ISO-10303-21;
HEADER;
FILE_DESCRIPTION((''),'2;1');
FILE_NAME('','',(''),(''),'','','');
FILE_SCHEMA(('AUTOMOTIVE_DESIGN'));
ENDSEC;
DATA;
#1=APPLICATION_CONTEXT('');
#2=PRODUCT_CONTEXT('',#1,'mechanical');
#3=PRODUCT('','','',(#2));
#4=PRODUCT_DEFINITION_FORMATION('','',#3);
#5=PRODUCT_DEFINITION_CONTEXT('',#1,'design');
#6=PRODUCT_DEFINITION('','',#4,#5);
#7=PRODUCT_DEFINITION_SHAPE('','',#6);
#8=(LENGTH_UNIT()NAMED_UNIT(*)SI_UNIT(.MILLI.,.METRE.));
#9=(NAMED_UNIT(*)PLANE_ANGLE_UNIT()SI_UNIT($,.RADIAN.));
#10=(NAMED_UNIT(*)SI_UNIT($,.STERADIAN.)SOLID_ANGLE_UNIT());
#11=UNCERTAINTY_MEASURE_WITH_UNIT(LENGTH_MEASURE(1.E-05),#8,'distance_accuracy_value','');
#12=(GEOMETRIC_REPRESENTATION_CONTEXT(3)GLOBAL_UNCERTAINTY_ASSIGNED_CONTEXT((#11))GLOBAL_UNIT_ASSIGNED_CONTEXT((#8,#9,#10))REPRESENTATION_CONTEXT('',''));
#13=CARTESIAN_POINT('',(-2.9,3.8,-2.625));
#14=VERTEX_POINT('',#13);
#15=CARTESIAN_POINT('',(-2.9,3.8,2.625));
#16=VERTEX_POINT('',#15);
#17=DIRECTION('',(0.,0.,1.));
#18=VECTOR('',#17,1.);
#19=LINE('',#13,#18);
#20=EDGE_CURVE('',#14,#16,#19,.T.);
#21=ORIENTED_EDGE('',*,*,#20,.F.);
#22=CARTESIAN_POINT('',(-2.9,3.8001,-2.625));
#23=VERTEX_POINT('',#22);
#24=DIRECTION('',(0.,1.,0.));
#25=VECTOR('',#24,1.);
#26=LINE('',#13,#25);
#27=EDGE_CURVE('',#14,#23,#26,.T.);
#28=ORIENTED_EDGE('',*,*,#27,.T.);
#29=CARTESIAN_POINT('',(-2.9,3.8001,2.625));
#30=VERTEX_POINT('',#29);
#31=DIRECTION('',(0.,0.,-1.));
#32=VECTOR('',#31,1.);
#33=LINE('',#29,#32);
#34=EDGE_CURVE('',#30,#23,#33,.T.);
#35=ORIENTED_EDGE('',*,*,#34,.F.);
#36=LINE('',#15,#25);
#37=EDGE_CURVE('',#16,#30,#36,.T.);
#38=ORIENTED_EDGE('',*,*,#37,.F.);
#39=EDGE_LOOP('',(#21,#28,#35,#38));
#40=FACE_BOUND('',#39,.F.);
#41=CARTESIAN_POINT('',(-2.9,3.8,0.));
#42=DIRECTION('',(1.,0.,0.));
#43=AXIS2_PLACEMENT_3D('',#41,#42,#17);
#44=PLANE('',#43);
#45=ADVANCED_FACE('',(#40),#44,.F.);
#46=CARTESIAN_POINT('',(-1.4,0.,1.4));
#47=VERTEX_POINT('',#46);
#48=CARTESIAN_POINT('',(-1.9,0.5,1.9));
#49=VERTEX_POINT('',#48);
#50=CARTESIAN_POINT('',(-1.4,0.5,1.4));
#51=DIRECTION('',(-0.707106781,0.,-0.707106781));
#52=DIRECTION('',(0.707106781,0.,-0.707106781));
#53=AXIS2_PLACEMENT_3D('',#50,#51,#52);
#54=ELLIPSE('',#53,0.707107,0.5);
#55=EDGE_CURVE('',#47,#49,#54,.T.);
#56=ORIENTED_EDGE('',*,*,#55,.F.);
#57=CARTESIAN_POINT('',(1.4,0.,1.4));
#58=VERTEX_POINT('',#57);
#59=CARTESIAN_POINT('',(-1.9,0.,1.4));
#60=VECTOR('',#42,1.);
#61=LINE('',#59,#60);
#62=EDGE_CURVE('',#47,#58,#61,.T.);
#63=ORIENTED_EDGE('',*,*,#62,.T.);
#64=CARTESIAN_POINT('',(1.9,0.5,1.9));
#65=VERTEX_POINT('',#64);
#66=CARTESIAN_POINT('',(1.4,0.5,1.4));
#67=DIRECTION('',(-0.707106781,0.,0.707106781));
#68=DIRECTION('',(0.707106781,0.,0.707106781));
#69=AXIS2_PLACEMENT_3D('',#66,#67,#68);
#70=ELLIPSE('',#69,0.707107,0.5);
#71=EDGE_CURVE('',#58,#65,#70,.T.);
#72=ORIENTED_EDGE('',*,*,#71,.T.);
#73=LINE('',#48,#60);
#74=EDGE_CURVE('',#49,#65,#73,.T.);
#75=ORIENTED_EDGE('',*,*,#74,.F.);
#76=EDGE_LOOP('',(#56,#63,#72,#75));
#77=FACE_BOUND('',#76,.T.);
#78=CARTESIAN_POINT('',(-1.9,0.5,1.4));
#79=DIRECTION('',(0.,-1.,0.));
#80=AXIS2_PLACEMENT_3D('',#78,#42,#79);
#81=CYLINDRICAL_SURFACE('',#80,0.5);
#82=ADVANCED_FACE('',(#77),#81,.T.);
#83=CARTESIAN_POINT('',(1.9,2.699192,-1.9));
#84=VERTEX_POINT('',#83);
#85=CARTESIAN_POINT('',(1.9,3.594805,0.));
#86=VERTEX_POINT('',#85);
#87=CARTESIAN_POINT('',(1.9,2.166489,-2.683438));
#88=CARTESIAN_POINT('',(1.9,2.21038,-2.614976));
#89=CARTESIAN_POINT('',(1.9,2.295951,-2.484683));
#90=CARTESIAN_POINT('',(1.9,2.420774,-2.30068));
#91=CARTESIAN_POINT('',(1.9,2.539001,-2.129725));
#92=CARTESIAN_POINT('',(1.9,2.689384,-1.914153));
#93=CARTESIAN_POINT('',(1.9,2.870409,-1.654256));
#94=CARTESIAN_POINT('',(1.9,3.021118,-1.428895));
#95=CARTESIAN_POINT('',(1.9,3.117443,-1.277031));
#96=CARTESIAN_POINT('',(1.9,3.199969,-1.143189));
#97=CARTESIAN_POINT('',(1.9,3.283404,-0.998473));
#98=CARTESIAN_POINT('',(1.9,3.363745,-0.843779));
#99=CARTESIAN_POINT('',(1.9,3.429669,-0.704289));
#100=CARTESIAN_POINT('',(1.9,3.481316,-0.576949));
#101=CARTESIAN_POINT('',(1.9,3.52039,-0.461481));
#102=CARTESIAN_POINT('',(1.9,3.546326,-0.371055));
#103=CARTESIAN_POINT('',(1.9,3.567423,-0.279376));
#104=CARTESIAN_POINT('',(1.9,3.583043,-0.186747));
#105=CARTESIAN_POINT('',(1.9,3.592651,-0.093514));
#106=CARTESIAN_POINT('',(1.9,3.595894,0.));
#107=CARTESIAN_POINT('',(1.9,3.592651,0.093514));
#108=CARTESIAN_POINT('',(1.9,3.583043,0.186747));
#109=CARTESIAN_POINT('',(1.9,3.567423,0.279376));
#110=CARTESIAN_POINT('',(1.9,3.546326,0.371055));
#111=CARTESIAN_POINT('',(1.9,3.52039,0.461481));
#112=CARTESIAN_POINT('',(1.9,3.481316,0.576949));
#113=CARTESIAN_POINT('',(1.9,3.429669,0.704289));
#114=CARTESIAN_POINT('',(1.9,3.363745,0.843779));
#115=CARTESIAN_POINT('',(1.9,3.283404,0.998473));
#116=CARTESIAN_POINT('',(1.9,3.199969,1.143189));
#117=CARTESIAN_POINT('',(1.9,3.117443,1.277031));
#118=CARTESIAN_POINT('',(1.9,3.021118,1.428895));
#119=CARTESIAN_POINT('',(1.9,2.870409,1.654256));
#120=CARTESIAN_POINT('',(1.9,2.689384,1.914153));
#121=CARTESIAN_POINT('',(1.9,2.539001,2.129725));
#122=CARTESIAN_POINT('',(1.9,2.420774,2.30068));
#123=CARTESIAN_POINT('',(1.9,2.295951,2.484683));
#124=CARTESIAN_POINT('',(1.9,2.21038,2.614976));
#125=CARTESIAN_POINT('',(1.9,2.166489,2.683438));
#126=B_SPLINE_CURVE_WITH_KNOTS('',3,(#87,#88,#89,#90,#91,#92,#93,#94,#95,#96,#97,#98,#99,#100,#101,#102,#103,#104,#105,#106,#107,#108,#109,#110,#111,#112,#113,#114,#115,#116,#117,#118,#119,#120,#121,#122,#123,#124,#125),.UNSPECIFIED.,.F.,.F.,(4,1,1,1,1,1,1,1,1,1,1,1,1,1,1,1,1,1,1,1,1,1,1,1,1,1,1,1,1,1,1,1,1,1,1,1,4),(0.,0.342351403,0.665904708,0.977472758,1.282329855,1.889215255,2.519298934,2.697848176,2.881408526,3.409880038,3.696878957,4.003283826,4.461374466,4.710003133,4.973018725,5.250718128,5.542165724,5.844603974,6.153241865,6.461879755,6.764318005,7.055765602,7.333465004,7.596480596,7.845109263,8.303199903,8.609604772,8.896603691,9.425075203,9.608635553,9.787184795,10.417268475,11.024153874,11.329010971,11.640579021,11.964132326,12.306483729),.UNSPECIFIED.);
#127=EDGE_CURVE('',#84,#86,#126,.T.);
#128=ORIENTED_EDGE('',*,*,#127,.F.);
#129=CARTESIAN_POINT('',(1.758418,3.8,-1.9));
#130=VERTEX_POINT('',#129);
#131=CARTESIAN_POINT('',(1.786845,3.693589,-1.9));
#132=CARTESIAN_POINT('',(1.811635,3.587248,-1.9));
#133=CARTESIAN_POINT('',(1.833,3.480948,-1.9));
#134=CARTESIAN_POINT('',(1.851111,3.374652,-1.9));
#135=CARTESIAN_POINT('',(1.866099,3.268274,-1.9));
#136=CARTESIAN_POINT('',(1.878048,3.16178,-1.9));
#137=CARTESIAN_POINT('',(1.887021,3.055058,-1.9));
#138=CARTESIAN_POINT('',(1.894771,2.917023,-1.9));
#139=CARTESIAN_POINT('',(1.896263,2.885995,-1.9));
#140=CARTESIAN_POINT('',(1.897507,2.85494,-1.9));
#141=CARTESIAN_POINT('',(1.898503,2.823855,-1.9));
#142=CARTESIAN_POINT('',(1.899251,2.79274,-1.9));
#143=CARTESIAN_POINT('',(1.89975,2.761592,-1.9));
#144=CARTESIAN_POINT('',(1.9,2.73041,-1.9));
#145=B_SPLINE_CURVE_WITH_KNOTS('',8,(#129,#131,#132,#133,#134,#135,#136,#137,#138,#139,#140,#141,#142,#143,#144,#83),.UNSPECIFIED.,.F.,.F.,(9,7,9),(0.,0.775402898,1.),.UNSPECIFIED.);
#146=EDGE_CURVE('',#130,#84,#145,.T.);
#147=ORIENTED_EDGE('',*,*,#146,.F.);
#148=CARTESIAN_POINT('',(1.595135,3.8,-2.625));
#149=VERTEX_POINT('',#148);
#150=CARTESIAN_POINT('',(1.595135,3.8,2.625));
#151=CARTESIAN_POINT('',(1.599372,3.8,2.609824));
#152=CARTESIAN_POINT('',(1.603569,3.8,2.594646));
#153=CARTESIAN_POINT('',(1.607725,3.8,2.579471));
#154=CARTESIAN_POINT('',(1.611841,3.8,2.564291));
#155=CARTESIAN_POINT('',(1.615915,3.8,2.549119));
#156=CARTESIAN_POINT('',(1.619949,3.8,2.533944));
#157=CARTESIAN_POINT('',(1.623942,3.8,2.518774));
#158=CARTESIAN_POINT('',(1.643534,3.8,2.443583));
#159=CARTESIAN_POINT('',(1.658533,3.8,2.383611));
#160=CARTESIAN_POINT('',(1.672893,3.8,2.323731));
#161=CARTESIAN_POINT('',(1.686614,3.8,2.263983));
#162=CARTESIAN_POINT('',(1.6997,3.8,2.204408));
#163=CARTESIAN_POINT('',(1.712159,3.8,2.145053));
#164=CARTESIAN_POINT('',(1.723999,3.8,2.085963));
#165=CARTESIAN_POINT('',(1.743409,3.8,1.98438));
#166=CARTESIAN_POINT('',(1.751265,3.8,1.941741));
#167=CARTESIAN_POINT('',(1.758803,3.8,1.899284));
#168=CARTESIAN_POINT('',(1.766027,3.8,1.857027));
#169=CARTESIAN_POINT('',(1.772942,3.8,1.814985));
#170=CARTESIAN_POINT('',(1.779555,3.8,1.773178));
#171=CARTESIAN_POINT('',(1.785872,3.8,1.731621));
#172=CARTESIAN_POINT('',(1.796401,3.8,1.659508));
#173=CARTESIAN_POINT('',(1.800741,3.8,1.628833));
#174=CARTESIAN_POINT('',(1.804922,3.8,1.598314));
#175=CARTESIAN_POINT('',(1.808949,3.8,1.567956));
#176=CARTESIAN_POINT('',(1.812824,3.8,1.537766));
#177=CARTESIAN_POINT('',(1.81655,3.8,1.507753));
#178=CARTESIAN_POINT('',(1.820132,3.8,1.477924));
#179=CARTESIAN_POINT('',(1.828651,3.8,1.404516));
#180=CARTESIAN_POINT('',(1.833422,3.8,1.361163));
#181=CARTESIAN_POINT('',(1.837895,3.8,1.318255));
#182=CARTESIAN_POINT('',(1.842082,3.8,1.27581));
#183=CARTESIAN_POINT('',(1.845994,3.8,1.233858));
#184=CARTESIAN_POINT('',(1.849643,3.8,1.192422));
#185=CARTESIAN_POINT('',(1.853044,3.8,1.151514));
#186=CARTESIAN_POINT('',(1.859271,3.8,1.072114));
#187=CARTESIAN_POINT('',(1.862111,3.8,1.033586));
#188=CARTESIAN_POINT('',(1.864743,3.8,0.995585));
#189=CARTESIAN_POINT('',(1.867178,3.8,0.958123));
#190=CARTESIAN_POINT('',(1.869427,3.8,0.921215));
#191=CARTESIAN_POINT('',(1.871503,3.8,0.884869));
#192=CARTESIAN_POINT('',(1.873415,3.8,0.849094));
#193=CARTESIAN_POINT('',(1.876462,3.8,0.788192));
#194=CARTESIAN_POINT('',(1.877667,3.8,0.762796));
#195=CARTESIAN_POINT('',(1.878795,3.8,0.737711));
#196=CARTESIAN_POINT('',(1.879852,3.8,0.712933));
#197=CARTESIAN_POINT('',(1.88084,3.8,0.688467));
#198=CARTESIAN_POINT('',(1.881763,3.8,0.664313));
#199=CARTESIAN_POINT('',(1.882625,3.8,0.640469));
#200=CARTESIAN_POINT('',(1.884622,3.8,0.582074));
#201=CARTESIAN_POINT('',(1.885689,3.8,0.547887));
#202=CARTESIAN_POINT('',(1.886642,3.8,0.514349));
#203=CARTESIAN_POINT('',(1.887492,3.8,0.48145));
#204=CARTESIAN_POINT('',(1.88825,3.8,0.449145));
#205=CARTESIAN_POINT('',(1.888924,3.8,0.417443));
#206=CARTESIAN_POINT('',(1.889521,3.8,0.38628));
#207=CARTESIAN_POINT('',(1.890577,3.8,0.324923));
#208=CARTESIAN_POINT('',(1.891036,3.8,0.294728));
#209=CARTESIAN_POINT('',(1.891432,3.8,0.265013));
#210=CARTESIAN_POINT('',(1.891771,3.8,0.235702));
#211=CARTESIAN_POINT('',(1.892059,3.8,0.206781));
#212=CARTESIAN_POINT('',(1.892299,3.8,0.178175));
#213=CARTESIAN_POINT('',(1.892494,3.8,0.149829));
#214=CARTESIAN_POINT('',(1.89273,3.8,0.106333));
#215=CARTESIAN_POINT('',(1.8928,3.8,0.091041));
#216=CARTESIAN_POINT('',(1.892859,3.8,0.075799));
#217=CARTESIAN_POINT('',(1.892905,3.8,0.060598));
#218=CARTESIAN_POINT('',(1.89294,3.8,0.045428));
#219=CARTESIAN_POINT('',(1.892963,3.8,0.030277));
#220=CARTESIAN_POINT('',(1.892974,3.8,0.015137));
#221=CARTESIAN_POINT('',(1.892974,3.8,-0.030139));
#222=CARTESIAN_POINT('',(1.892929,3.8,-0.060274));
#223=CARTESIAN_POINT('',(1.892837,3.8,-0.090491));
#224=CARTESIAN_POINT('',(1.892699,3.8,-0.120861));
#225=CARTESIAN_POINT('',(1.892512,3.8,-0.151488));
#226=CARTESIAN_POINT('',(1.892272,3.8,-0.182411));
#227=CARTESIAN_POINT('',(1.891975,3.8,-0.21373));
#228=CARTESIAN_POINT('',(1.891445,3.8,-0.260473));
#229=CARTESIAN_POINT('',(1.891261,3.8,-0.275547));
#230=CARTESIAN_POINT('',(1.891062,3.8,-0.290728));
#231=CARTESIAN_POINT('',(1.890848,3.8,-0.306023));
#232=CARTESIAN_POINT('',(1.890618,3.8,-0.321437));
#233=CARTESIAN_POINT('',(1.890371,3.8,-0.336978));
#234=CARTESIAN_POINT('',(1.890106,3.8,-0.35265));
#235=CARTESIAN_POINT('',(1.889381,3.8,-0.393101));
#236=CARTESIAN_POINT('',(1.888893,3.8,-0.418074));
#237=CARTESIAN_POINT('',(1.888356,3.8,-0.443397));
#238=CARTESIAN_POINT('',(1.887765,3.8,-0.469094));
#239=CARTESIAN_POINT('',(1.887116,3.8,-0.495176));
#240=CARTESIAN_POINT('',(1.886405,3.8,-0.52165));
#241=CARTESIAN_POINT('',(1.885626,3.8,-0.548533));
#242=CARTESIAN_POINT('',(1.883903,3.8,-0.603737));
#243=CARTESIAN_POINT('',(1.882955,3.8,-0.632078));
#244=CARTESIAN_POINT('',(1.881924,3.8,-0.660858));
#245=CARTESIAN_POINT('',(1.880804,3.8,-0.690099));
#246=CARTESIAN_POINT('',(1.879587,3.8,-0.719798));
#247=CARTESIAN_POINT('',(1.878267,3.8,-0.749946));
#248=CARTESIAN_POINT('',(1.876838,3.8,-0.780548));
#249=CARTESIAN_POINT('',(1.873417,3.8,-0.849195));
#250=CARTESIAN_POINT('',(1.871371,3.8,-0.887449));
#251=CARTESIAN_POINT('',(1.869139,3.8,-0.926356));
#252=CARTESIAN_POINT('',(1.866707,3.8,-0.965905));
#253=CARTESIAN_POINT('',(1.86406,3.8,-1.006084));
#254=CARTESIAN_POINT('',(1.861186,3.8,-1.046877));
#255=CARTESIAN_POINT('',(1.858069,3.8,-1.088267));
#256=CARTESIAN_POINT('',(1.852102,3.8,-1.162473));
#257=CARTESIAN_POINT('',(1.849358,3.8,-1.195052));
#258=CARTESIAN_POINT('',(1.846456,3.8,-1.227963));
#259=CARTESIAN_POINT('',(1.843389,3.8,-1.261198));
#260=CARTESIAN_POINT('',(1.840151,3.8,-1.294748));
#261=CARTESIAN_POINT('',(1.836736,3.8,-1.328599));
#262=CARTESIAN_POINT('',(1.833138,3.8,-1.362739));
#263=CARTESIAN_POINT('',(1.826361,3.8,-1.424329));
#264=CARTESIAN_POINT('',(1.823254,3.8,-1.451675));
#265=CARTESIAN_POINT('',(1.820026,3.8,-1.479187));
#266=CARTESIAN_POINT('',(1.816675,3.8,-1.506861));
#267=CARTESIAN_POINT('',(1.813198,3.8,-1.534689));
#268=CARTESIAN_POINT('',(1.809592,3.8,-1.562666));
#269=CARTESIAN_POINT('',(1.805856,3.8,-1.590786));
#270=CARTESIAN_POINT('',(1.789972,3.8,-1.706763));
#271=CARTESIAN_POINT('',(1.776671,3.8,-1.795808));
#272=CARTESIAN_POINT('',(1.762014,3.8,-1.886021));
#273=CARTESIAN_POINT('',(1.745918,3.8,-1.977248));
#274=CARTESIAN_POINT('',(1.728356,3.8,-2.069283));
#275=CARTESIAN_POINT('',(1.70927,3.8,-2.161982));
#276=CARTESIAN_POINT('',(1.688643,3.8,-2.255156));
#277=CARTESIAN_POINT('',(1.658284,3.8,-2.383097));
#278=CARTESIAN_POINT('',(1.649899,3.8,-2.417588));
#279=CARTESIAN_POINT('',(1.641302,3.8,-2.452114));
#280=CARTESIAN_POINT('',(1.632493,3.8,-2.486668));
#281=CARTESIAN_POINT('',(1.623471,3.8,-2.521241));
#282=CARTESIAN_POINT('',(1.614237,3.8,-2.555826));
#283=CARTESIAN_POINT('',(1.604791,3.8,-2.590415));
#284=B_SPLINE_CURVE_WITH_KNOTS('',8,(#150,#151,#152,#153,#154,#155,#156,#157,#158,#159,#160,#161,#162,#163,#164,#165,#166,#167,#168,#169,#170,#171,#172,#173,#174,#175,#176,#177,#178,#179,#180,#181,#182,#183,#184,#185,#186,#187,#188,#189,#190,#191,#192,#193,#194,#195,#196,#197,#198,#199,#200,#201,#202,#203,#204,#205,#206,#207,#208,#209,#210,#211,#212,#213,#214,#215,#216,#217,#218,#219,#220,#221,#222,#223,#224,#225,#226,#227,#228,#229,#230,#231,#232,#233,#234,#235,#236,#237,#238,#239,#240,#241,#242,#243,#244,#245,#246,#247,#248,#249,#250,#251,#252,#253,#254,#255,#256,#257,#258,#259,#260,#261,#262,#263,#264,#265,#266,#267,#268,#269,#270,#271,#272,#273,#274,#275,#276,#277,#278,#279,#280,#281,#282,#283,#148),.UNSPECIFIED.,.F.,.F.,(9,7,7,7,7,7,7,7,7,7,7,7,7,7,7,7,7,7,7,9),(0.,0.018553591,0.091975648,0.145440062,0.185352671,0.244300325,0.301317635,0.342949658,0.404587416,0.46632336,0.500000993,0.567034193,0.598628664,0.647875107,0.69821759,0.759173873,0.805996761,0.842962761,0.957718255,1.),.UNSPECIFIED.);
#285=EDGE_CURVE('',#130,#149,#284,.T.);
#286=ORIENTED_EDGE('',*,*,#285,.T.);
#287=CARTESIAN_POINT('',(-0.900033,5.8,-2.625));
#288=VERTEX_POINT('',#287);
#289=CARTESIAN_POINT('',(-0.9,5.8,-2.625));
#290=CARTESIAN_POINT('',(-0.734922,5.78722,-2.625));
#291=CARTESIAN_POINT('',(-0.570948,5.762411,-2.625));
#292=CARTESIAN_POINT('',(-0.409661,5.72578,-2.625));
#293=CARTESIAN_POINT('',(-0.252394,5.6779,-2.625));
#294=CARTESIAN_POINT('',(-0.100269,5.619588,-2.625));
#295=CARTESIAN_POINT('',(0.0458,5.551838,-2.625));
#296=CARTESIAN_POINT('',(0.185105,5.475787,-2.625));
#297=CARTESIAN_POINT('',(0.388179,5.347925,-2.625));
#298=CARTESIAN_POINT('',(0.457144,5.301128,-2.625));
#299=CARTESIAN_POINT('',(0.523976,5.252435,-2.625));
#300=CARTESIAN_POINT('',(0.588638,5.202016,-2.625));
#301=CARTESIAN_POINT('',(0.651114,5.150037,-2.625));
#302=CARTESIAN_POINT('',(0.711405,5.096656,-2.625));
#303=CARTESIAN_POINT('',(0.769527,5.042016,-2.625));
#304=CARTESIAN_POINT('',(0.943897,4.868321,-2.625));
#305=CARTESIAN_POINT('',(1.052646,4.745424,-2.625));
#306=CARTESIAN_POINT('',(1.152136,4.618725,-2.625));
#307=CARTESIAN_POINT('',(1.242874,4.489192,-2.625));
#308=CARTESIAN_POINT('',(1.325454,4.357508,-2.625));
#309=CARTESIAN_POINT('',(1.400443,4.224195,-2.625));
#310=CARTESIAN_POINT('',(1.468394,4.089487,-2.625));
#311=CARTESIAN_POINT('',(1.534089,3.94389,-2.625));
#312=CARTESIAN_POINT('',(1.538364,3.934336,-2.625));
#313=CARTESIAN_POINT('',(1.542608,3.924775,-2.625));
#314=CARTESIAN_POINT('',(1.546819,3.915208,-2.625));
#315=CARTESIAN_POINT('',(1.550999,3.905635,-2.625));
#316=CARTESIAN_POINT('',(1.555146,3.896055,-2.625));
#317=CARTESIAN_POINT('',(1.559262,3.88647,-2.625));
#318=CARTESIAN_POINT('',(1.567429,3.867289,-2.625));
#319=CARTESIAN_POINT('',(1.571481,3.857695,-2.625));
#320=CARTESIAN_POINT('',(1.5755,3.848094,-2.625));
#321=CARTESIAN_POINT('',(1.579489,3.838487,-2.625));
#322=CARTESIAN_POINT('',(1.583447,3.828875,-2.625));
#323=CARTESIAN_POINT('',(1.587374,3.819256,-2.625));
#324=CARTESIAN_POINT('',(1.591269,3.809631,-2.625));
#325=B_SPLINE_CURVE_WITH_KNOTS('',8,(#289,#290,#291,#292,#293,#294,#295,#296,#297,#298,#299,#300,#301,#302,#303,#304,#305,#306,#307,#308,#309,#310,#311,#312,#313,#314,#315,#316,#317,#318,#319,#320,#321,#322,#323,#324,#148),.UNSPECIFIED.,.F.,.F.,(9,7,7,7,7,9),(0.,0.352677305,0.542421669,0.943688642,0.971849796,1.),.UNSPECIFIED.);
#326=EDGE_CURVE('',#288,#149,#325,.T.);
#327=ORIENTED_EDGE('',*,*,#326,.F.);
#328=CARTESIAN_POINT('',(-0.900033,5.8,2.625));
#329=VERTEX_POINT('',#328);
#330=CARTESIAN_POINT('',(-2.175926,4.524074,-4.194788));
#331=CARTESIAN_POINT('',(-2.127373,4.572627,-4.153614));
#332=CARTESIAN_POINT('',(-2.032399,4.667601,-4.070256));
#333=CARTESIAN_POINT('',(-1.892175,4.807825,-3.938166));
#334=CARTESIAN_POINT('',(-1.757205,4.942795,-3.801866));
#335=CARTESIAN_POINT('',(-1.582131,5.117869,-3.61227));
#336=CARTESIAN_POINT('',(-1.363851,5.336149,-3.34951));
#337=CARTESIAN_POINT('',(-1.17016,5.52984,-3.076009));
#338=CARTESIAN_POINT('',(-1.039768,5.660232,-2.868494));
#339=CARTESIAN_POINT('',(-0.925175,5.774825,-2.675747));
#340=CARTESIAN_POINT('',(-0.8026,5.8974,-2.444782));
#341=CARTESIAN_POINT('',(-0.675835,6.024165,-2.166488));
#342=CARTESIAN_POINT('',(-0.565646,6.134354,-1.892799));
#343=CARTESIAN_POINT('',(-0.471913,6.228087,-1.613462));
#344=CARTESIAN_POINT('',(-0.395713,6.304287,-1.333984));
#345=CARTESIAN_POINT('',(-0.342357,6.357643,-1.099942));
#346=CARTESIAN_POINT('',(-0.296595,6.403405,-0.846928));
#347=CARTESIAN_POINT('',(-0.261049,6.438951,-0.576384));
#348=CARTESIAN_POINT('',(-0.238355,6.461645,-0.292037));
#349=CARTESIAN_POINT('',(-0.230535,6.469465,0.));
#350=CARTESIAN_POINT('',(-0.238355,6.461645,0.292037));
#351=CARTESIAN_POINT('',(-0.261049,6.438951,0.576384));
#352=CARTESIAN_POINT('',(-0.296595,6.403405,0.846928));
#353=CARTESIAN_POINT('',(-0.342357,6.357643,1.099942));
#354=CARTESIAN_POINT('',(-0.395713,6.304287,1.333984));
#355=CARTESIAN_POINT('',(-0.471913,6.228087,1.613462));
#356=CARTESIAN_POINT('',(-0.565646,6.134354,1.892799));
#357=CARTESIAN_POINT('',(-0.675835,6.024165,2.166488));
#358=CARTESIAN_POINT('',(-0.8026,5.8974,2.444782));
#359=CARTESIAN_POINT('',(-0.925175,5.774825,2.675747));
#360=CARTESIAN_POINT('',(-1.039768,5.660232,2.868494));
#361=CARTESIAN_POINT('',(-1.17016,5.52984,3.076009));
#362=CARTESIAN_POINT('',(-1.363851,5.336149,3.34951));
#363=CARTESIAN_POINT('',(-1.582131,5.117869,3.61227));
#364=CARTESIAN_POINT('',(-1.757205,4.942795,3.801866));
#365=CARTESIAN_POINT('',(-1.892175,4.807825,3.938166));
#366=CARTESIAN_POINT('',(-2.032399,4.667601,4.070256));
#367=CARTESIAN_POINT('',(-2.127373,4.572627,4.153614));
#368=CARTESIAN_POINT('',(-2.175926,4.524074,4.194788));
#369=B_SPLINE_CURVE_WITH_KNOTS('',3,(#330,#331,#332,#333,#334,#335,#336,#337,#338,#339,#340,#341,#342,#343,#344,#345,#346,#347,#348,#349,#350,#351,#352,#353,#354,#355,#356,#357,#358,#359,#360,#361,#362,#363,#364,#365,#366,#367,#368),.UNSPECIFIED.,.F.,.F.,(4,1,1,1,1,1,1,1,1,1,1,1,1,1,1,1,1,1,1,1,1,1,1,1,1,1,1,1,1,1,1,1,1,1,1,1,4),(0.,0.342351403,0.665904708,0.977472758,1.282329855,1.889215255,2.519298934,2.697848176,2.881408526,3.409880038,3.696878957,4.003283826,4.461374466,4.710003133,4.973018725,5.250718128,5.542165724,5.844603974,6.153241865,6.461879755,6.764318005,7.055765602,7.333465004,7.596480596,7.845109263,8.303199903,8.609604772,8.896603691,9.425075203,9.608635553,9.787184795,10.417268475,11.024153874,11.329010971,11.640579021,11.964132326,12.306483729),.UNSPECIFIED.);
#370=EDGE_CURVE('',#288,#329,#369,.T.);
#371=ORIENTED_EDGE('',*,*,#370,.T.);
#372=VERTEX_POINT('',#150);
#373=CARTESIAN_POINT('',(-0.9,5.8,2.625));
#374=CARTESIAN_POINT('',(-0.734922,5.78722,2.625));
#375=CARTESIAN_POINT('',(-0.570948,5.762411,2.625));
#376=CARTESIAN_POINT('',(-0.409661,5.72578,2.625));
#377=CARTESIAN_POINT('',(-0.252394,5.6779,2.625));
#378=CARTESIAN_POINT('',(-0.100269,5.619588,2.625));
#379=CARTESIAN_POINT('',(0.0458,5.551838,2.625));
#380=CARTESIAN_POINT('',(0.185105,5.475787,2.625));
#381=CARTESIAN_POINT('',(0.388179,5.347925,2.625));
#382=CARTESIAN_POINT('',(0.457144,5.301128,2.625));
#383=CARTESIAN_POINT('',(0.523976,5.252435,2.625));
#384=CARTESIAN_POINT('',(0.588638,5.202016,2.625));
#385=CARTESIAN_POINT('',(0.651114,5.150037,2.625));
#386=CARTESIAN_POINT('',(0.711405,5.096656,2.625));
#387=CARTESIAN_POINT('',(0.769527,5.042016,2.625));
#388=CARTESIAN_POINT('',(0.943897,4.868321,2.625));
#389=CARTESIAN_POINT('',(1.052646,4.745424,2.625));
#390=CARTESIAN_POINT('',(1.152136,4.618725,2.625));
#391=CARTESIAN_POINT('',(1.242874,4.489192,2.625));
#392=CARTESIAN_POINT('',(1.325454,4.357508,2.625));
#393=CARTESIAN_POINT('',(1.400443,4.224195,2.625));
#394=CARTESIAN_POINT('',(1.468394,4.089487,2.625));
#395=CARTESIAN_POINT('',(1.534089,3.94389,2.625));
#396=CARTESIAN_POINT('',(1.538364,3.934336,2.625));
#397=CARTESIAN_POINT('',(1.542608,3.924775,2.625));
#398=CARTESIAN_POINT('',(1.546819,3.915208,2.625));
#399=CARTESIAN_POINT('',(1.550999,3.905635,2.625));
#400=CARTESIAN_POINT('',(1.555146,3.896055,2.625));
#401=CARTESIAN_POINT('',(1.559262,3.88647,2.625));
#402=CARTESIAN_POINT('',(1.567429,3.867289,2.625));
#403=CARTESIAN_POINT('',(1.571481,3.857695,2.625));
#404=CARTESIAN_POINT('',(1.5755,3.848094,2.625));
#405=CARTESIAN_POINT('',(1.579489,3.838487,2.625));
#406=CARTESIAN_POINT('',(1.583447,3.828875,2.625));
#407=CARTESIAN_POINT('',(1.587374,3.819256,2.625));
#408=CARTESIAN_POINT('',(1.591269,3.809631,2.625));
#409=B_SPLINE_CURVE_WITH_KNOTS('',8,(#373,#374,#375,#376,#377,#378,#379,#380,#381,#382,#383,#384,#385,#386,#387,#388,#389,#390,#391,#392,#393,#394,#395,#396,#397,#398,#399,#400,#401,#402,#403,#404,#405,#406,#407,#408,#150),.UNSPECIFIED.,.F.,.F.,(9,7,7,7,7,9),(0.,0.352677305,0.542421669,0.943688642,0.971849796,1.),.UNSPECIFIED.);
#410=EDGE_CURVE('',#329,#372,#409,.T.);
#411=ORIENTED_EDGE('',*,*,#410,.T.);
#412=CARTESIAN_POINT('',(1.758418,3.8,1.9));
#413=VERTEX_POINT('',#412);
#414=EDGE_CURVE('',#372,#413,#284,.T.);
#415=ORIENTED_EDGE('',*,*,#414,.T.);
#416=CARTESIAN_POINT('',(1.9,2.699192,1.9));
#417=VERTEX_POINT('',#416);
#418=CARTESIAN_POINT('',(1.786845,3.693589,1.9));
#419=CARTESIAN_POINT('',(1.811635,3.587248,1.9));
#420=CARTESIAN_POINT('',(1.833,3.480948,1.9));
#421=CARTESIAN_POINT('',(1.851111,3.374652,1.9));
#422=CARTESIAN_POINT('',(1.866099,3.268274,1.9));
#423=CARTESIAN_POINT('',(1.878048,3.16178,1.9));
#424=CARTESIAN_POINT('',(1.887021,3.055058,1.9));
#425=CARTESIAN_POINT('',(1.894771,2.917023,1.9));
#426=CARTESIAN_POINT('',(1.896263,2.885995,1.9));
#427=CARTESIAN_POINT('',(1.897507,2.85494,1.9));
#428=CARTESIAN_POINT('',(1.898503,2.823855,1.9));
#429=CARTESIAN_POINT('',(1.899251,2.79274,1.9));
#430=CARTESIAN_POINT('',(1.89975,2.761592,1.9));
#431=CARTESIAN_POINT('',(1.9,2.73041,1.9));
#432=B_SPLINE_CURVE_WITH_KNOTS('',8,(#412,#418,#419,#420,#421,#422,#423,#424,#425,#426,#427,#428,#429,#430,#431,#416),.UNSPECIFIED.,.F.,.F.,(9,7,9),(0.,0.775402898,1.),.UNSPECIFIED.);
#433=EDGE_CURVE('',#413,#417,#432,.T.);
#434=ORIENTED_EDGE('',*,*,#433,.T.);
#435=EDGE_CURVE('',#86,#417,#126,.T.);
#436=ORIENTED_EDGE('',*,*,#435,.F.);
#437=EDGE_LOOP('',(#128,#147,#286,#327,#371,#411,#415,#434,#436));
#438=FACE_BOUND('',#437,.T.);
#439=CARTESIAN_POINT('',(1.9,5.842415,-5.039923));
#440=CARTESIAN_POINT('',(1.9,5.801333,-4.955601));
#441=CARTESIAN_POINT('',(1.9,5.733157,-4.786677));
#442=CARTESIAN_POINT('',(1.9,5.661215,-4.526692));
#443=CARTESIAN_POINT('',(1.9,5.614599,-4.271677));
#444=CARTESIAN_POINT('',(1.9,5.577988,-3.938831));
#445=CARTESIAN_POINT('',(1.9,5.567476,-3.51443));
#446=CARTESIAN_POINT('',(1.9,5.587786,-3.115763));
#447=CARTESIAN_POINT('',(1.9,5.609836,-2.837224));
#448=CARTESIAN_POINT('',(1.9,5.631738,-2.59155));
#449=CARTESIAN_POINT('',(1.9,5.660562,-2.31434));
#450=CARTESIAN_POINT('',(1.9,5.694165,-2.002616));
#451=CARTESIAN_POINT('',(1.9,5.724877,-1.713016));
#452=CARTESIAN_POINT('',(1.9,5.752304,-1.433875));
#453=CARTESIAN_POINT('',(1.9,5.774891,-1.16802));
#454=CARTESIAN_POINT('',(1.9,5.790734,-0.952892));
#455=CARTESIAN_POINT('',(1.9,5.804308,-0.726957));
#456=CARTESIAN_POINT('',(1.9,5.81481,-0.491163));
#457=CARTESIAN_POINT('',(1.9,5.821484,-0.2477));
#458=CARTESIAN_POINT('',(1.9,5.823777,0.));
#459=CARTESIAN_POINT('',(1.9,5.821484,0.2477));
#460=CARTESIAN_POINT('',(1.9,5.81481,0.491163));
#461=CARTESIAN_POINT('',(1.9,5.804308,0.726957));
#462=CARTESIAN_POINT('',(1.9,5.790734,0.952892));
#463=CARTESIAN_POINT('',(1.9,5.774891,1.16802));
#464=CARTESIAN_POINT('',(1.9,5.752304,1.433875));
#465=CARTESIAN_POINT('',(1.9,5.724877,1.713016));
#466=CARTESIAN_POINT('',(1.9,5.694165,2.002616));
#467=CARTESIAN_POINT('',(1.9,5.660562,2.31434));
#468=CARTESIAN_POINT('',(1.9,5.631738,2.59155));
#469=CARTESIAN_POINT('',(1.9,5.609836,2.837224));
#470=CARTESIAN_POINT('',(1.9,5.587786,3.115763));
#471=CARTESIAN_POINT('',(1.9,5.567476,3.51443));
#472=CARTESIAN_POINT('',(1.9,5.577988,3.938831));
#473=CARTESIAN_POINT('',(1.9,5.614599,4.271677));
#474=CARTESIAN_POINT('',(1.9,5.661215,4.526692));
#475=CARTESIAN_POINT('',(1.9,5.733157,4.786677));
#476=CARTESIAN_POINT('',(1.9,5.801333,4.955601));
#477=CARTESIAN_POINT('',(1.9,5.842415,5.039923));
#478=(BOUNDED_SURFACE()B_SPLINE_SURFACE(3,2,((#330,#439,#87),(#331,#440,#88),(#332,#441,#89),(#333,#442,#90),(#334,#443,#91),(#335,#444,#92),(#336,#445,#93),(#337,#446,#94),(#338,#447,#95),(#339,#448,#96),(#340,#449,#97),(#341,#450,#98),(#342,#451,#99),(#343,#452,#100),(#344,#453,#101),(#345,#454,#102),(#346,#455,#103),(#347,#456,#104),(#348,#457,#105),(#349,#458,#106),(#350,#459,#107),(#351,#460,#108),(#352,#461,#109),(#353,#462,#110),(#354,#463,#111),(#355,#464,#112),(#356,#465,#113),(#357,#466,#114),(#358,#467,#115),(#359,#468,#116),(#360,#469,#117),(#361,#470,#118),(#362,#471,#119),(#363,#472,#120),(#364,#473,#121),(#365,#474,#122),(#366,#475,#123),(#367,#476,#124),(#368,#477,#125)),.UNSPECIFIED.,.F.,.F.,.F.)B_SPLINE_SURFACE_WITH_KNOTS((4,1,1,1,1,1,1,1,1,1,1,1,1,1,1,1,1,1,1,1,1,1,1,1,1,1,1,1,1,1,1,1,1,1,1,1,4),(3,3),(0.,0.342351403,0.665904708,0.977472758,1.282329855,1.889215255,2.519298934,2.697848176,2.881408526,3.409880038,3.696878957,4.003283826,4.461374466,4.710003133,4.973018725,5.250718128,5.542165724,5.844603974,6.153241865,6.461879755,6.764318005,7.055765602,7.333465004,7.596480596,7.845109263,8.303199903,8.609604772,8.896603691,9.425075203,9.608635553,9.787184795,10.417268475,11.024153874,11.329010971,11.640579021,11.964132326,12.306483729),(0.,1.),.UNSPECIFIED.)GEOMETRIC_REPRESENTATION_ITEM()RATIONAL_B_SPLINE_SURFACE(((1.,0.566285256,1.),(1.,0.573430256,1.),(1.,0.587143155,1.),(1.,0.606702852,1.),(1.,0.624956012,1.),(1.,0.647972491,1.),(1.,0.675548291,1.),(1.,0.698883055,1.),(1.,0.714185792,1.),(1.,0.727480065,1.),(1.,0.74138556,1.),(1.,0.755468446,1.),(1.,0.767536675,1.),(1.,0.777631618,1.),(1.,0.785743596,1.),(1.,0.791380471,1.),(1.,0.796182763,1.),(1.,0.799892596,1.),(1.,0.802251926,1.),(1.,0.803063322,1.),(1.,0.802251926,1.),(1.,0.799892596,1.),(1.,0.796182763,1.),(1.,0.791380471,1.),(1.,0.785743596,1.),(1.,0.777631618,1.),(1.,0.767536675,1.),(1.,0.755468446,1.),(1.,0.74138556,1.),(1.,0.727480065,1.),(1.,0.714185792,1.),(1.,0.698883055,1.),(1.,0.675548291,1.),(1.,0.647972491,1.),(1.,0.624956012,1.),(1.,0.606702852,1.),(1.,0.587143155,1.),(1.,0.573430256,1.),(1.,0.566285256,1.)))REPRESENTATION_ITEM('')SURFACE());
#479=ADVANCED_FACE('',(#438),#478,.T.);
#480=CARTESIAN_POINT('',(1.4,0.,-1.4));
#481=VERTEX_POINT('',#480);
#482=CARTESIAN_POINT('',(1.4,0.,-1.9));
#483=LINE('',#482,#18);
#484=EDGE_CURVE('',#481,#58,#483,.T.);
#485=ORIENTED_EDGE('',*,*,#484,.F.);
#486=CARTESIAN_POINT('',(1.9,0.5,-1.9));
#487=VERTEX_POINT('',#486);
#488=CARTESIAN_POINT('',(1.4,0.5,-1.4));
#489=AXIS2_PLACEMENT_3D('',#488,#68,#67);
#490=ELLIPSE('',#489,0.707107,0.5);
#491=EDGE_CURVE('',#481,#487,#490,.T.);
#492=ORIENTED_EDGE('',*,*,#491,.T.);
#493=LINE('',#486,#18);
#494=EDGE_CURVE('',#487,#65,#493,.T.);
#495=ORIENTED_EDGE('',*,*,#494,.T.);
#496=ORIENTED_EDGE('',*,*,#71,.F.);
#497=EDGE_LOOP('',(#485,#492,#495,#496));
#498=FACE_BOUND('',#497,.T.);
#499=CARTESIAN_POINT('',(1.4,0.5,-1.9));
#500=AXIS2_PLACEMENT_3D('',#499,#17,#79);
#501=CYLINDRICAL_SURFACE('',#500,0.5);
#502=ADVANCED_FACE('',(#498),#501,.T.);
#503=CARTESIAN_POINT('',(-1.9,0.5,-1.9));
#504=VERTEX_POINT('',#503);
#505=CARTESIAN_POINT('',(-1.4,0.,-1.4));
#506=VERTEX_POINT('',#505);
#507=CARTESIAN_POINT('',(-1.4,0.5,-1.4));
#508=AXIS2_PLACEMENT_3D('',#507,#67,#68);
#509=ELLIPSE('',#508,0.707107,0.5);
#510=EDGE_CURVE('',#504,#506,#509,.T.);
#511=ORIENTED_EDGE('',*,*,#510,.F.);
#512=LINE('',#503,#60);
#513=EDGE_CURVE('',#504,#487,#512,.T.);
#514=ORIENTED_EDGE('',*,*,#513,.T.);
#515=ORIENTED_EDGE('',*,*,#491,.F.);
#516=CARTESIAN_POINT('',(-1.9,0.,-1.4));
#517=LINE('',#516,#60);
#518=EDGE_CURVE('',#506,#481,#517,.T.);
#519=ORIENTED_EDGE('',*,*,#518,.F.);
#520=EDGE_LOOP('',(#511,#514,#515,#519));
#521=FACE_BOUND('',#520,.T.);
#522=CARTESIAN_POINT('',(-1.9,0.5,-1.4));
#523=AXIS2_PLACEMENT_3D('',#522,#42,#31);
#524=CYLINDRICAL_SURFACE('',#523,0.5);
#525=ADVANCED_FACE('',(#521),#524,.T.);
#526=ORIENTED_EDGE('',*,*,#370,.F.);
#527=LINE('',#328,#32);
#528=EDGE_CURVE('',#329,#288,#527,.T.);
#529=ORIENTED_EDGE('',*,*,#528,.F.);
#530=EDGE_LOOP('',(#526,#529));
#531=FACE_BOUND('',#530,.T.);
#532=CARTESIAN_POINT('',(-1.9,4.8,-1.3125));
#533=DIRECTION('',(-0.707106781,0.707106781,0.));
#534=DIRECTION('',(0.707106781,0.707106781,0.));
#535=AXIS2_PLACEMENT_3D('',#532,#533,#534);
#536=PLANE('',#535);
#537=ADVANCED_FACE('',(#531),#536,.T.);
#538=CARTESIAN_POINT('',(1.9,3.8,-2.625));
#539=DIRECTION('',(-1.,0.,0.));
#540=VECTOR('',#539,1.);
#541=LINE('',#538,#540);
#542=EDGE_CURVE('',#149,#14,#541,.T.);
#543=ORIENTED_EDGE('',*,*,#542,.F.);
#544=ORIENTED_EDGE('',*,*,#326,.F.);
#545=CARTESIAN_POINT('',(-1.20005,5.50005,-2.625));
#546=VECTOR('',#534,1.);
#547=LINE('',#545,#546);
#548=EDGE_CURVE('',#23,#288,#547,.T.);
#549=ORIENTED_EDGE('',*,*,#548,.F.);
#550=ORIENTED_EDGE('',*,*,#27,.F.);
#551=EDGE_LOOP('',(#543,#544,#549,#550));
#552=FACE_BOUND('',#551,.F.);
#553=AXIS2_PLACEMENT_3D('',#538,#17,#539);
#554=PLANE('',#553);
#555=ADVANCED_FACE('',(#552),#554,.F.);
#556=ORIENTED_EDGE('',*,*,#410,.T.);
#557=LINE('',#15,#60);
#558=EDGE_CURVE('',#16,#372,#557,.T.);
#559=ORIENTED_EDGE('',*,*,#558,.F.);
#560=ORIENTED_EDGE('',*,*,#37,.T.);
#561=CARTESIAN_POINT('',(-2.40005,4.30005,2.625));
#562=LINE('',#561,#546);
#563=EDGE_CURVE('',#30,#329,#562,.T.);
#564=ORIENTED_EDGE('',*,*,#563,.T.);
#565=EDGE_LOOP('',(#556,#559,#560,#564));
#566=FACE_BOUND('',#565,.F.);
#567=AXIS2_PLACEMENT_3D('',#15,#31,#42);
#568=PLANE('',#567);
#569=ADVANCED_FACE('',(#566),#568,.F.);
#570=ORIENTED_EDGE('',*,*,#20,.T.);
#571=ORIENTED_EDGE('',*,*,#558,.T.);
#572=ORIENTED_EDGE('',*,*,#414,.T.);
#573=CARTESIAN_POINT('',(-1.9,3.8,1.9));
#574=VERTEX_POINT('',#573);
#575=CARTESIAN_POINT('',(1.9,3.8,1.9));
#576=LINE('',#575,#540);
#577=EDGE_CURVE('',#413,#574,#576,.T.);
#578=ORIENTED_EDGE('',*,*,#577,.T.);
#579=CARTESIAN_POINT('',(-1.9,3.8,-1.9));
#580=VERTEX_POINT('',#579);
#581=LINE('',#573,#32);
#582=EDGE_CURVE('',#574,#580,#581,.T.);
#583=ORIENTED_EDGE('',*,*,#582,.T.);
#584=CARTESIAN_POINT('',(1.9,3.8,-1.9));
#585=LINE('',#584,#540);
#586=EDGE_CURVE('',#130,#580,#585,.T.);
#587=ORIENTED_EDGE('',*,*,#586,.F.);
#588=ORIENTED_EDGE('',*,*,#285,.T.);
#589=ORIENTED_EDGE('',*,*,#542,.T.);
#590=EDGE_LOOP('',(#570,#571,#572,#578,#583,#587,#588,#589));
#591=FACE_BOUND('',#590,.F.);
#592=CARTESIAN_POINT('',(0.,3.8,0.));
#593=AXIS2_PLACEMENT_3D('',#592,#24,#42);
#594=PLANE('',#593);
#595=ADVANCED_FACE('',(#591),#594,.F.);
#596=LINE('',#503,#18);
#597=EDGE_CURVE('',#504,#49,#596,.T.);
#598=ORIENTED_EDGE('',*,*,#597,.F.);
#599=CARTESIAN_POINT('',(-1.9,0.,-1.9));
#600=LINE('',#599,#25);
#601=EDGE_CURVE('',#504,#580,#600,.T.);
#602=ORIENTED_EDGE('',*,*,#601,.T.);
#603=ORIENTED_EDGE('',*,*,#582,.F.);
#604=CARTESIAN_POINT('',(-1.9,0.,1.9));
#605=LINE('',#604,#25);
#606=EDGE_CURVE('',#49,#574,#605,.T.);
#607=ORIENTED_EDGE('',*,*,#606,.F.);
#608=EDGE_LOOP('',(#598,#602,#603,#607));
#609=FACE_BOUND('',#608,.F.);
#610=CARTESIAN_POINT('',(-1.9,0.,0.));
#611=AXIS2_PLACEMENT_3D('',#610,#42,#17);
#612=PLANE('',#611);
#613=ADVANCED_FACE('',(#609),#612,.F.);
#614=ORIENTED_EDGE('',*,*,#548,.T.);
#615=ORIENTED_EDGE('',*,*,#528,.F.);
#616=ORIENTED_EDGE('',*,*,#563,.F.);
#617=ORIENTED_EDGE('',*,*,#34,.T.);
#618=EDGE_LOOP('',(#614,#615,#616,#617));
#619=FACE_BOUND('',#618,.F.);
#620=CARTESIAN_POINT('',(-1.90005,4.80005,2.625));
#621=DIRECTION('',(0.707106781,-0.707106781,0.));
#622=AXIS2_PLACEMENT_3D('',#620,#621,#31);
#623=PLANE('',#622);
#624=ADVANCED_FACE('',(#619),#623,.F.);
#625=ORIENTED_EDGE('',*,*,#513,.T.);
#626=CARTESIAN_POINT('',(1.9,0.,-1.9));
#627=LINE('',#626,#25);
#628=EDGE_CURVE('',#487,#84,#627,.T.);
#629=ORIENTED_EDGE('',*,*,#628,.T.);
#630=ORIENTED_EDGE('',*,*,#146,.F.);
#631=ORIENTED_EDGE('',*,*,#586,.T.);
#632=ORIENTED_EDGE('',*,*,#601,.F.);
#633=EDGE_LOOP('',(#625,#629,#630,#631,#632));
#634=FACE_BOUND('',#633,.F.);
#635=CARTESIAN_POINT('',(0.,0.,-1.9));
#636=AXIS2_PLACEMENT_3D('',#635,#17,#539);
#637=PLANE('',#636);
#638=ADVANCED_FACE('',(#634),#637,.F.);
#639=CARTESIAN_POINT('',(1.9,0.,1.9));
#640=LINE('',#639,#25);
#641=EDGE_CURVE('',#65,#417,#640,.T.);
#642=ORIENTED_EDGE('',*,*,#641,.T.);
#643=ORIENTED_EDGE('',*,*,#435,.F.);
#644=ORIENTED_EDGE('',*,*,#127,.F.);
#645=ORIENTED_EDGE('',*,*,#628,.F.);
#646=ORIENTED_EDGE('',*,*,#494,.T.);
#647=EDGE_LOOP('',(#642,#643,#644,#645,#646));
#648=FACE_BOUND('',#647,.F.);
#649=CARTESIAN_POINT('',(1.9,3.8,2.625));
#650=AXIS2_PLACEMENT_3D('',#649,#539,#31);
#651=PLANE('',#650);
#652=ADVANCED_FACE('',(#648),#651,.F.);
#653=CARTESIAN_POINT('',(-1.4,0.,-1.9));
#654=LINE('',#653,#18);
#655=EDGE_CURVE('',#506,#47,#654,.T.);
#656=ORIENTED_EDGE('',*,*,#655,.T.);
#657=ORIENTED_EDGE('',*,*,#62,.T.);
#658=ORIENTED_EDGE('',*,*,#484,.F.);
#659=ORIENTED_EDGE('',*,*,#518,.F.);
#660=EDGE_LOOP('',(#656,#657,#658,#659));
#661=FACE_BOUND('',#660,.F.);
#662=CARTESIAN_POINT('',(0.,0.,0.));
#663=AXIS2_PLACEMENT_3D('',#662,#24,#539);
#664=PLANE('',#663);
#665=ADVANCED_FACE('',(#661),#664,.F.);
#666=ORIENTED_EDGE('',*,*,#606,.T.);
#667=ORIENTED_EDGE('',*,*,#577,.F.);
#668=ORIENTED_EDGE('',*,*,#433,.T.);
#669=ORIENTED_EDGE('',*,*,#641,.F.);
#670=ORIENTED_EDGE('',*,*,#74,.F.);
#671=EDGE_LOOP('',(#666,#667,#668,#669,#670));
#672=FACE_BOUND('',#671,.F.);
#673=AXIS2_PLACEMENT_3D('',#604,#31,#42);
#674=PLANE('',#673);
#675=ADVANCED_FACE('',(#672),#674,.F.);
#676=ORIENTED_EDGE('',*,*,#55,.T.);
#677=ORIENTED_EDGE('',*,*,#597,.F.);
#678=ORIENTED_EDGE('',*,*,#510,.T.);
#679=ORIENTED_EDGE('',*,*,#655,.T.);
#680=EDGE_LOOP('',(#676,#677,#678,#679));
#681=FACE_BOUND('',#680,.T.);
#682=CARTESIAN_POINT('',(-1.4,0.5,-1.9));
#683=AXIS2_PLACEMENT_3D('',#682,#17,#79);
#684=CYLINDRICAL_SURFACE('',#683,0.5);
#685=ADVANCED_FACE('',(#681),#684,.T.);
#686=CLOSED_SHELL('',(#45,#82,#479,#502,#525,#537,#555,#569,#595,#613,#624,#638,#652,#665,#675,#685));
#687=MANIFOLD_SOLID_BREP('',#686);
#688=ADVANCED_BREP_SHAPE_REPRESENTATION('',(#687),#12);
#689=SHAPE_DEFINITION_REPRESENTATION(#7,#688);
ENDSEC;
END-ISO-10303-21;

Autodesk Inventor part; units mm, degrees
ref_plane "YZ Plane" through (0, 0, 0) normal (1, 0, 0) x (0, 1, 0)
ref_plane "XZ Plane" through (0, 0, 0) normal (0, 1, 0) x (-1, 0, 0)
ref_plane "XY Plane" through (0, 0, 0) normal (0, 0, 1) x (1, 0, 0)
sketch "Эскиз1" plane through (0, 0, 0) normal (0, 1, 0) x (-1, 0, 0)
  line L0 (1.9, 1.9) -> (-1.9, 1.9)
  line L1 (-1.9, 1.9) -> (-1.9, -1.9)
  line L2 (-1.9, -1.9) -> (1.9, -1.9)
  line L3 (1.9, -1.9) -> (1.9, 1.9)
  line L4 (2.66, 0) -> (-2.66, 0) projected
  line L5 (0, -2.66) -> (0, 2.66) projected
  point P0 (0, 0)
  dimension "d0" = 3.8
extrude "Выдавливание1" add sketch "Эскиз1" along normal blind 3.8
sketch "Эскиз2" plane through (0, 3.8, 0) normal (0, 1, 0) x (1, 0, 0)
  line L0 (-2.9, -2.625) -> (1.9, -2.625)
  line L1 (1.9, -2.625) -> (1.9, 2.625)
  line L2 (1.9, 2.625) -> (-2.9, 2.625)
  line L3 (-2.9, 2.625) -> (-2.9, -2.625)
  line L4 (1.9, -1.9) -> (1.9, 1.9) projected
  line L5 (-3.86, 0) -> (2.86, 0) projected
  point P0 (0, 0)
  dimension "d3" = 5.25
  dimension "d4" = 4.8
extrude "Выдавливание2" add sketch "Эскиз2" along normal blind 2
sketch "Эскиз5" plane through (1.9, 0, 1.9) normal (1, 0, 0) x (0, 0, -1)
  line L0 (4.525, 3.8) -> (4.525, 5.8) projected
  line L1 (-0.725, 5.8) -> (4.525, 5.8) projected
  line L2 (4.525, 5.8) -> (-0.725, 5.8)
  line L3 (-0.725, 3.8) -> (-0.725, 5.8) projected
  arc A0 (4.525, 5.8) -> (-0.725, 5.8) centre (1.9, 0.9668) ccw
  point P0 (1.9, 0)
  dimension "d10" = 5.5
chamfer "Фаска1" distance 2 angle 45 1 edges at (-2.9, 5.8, 0)
extrude "Выдавливание3" add sketch "Эскиз5" against normal up to surface surface through (-1.9, 4.8, -1.3125) normal (-0.7071068, 0.7071068, 0)
fillet "Сопряжение1" radius 3 1 edges at (1.9, 6.4668, 0)
fillet "Сопряжение2" radius 0.5 4 edges at (1.9, 0, 0) (0, 0, 1.9) (0, 0, -1.9) (-1.9, 0, 0)
properties part number "BUTTON_OUTSIDE"
